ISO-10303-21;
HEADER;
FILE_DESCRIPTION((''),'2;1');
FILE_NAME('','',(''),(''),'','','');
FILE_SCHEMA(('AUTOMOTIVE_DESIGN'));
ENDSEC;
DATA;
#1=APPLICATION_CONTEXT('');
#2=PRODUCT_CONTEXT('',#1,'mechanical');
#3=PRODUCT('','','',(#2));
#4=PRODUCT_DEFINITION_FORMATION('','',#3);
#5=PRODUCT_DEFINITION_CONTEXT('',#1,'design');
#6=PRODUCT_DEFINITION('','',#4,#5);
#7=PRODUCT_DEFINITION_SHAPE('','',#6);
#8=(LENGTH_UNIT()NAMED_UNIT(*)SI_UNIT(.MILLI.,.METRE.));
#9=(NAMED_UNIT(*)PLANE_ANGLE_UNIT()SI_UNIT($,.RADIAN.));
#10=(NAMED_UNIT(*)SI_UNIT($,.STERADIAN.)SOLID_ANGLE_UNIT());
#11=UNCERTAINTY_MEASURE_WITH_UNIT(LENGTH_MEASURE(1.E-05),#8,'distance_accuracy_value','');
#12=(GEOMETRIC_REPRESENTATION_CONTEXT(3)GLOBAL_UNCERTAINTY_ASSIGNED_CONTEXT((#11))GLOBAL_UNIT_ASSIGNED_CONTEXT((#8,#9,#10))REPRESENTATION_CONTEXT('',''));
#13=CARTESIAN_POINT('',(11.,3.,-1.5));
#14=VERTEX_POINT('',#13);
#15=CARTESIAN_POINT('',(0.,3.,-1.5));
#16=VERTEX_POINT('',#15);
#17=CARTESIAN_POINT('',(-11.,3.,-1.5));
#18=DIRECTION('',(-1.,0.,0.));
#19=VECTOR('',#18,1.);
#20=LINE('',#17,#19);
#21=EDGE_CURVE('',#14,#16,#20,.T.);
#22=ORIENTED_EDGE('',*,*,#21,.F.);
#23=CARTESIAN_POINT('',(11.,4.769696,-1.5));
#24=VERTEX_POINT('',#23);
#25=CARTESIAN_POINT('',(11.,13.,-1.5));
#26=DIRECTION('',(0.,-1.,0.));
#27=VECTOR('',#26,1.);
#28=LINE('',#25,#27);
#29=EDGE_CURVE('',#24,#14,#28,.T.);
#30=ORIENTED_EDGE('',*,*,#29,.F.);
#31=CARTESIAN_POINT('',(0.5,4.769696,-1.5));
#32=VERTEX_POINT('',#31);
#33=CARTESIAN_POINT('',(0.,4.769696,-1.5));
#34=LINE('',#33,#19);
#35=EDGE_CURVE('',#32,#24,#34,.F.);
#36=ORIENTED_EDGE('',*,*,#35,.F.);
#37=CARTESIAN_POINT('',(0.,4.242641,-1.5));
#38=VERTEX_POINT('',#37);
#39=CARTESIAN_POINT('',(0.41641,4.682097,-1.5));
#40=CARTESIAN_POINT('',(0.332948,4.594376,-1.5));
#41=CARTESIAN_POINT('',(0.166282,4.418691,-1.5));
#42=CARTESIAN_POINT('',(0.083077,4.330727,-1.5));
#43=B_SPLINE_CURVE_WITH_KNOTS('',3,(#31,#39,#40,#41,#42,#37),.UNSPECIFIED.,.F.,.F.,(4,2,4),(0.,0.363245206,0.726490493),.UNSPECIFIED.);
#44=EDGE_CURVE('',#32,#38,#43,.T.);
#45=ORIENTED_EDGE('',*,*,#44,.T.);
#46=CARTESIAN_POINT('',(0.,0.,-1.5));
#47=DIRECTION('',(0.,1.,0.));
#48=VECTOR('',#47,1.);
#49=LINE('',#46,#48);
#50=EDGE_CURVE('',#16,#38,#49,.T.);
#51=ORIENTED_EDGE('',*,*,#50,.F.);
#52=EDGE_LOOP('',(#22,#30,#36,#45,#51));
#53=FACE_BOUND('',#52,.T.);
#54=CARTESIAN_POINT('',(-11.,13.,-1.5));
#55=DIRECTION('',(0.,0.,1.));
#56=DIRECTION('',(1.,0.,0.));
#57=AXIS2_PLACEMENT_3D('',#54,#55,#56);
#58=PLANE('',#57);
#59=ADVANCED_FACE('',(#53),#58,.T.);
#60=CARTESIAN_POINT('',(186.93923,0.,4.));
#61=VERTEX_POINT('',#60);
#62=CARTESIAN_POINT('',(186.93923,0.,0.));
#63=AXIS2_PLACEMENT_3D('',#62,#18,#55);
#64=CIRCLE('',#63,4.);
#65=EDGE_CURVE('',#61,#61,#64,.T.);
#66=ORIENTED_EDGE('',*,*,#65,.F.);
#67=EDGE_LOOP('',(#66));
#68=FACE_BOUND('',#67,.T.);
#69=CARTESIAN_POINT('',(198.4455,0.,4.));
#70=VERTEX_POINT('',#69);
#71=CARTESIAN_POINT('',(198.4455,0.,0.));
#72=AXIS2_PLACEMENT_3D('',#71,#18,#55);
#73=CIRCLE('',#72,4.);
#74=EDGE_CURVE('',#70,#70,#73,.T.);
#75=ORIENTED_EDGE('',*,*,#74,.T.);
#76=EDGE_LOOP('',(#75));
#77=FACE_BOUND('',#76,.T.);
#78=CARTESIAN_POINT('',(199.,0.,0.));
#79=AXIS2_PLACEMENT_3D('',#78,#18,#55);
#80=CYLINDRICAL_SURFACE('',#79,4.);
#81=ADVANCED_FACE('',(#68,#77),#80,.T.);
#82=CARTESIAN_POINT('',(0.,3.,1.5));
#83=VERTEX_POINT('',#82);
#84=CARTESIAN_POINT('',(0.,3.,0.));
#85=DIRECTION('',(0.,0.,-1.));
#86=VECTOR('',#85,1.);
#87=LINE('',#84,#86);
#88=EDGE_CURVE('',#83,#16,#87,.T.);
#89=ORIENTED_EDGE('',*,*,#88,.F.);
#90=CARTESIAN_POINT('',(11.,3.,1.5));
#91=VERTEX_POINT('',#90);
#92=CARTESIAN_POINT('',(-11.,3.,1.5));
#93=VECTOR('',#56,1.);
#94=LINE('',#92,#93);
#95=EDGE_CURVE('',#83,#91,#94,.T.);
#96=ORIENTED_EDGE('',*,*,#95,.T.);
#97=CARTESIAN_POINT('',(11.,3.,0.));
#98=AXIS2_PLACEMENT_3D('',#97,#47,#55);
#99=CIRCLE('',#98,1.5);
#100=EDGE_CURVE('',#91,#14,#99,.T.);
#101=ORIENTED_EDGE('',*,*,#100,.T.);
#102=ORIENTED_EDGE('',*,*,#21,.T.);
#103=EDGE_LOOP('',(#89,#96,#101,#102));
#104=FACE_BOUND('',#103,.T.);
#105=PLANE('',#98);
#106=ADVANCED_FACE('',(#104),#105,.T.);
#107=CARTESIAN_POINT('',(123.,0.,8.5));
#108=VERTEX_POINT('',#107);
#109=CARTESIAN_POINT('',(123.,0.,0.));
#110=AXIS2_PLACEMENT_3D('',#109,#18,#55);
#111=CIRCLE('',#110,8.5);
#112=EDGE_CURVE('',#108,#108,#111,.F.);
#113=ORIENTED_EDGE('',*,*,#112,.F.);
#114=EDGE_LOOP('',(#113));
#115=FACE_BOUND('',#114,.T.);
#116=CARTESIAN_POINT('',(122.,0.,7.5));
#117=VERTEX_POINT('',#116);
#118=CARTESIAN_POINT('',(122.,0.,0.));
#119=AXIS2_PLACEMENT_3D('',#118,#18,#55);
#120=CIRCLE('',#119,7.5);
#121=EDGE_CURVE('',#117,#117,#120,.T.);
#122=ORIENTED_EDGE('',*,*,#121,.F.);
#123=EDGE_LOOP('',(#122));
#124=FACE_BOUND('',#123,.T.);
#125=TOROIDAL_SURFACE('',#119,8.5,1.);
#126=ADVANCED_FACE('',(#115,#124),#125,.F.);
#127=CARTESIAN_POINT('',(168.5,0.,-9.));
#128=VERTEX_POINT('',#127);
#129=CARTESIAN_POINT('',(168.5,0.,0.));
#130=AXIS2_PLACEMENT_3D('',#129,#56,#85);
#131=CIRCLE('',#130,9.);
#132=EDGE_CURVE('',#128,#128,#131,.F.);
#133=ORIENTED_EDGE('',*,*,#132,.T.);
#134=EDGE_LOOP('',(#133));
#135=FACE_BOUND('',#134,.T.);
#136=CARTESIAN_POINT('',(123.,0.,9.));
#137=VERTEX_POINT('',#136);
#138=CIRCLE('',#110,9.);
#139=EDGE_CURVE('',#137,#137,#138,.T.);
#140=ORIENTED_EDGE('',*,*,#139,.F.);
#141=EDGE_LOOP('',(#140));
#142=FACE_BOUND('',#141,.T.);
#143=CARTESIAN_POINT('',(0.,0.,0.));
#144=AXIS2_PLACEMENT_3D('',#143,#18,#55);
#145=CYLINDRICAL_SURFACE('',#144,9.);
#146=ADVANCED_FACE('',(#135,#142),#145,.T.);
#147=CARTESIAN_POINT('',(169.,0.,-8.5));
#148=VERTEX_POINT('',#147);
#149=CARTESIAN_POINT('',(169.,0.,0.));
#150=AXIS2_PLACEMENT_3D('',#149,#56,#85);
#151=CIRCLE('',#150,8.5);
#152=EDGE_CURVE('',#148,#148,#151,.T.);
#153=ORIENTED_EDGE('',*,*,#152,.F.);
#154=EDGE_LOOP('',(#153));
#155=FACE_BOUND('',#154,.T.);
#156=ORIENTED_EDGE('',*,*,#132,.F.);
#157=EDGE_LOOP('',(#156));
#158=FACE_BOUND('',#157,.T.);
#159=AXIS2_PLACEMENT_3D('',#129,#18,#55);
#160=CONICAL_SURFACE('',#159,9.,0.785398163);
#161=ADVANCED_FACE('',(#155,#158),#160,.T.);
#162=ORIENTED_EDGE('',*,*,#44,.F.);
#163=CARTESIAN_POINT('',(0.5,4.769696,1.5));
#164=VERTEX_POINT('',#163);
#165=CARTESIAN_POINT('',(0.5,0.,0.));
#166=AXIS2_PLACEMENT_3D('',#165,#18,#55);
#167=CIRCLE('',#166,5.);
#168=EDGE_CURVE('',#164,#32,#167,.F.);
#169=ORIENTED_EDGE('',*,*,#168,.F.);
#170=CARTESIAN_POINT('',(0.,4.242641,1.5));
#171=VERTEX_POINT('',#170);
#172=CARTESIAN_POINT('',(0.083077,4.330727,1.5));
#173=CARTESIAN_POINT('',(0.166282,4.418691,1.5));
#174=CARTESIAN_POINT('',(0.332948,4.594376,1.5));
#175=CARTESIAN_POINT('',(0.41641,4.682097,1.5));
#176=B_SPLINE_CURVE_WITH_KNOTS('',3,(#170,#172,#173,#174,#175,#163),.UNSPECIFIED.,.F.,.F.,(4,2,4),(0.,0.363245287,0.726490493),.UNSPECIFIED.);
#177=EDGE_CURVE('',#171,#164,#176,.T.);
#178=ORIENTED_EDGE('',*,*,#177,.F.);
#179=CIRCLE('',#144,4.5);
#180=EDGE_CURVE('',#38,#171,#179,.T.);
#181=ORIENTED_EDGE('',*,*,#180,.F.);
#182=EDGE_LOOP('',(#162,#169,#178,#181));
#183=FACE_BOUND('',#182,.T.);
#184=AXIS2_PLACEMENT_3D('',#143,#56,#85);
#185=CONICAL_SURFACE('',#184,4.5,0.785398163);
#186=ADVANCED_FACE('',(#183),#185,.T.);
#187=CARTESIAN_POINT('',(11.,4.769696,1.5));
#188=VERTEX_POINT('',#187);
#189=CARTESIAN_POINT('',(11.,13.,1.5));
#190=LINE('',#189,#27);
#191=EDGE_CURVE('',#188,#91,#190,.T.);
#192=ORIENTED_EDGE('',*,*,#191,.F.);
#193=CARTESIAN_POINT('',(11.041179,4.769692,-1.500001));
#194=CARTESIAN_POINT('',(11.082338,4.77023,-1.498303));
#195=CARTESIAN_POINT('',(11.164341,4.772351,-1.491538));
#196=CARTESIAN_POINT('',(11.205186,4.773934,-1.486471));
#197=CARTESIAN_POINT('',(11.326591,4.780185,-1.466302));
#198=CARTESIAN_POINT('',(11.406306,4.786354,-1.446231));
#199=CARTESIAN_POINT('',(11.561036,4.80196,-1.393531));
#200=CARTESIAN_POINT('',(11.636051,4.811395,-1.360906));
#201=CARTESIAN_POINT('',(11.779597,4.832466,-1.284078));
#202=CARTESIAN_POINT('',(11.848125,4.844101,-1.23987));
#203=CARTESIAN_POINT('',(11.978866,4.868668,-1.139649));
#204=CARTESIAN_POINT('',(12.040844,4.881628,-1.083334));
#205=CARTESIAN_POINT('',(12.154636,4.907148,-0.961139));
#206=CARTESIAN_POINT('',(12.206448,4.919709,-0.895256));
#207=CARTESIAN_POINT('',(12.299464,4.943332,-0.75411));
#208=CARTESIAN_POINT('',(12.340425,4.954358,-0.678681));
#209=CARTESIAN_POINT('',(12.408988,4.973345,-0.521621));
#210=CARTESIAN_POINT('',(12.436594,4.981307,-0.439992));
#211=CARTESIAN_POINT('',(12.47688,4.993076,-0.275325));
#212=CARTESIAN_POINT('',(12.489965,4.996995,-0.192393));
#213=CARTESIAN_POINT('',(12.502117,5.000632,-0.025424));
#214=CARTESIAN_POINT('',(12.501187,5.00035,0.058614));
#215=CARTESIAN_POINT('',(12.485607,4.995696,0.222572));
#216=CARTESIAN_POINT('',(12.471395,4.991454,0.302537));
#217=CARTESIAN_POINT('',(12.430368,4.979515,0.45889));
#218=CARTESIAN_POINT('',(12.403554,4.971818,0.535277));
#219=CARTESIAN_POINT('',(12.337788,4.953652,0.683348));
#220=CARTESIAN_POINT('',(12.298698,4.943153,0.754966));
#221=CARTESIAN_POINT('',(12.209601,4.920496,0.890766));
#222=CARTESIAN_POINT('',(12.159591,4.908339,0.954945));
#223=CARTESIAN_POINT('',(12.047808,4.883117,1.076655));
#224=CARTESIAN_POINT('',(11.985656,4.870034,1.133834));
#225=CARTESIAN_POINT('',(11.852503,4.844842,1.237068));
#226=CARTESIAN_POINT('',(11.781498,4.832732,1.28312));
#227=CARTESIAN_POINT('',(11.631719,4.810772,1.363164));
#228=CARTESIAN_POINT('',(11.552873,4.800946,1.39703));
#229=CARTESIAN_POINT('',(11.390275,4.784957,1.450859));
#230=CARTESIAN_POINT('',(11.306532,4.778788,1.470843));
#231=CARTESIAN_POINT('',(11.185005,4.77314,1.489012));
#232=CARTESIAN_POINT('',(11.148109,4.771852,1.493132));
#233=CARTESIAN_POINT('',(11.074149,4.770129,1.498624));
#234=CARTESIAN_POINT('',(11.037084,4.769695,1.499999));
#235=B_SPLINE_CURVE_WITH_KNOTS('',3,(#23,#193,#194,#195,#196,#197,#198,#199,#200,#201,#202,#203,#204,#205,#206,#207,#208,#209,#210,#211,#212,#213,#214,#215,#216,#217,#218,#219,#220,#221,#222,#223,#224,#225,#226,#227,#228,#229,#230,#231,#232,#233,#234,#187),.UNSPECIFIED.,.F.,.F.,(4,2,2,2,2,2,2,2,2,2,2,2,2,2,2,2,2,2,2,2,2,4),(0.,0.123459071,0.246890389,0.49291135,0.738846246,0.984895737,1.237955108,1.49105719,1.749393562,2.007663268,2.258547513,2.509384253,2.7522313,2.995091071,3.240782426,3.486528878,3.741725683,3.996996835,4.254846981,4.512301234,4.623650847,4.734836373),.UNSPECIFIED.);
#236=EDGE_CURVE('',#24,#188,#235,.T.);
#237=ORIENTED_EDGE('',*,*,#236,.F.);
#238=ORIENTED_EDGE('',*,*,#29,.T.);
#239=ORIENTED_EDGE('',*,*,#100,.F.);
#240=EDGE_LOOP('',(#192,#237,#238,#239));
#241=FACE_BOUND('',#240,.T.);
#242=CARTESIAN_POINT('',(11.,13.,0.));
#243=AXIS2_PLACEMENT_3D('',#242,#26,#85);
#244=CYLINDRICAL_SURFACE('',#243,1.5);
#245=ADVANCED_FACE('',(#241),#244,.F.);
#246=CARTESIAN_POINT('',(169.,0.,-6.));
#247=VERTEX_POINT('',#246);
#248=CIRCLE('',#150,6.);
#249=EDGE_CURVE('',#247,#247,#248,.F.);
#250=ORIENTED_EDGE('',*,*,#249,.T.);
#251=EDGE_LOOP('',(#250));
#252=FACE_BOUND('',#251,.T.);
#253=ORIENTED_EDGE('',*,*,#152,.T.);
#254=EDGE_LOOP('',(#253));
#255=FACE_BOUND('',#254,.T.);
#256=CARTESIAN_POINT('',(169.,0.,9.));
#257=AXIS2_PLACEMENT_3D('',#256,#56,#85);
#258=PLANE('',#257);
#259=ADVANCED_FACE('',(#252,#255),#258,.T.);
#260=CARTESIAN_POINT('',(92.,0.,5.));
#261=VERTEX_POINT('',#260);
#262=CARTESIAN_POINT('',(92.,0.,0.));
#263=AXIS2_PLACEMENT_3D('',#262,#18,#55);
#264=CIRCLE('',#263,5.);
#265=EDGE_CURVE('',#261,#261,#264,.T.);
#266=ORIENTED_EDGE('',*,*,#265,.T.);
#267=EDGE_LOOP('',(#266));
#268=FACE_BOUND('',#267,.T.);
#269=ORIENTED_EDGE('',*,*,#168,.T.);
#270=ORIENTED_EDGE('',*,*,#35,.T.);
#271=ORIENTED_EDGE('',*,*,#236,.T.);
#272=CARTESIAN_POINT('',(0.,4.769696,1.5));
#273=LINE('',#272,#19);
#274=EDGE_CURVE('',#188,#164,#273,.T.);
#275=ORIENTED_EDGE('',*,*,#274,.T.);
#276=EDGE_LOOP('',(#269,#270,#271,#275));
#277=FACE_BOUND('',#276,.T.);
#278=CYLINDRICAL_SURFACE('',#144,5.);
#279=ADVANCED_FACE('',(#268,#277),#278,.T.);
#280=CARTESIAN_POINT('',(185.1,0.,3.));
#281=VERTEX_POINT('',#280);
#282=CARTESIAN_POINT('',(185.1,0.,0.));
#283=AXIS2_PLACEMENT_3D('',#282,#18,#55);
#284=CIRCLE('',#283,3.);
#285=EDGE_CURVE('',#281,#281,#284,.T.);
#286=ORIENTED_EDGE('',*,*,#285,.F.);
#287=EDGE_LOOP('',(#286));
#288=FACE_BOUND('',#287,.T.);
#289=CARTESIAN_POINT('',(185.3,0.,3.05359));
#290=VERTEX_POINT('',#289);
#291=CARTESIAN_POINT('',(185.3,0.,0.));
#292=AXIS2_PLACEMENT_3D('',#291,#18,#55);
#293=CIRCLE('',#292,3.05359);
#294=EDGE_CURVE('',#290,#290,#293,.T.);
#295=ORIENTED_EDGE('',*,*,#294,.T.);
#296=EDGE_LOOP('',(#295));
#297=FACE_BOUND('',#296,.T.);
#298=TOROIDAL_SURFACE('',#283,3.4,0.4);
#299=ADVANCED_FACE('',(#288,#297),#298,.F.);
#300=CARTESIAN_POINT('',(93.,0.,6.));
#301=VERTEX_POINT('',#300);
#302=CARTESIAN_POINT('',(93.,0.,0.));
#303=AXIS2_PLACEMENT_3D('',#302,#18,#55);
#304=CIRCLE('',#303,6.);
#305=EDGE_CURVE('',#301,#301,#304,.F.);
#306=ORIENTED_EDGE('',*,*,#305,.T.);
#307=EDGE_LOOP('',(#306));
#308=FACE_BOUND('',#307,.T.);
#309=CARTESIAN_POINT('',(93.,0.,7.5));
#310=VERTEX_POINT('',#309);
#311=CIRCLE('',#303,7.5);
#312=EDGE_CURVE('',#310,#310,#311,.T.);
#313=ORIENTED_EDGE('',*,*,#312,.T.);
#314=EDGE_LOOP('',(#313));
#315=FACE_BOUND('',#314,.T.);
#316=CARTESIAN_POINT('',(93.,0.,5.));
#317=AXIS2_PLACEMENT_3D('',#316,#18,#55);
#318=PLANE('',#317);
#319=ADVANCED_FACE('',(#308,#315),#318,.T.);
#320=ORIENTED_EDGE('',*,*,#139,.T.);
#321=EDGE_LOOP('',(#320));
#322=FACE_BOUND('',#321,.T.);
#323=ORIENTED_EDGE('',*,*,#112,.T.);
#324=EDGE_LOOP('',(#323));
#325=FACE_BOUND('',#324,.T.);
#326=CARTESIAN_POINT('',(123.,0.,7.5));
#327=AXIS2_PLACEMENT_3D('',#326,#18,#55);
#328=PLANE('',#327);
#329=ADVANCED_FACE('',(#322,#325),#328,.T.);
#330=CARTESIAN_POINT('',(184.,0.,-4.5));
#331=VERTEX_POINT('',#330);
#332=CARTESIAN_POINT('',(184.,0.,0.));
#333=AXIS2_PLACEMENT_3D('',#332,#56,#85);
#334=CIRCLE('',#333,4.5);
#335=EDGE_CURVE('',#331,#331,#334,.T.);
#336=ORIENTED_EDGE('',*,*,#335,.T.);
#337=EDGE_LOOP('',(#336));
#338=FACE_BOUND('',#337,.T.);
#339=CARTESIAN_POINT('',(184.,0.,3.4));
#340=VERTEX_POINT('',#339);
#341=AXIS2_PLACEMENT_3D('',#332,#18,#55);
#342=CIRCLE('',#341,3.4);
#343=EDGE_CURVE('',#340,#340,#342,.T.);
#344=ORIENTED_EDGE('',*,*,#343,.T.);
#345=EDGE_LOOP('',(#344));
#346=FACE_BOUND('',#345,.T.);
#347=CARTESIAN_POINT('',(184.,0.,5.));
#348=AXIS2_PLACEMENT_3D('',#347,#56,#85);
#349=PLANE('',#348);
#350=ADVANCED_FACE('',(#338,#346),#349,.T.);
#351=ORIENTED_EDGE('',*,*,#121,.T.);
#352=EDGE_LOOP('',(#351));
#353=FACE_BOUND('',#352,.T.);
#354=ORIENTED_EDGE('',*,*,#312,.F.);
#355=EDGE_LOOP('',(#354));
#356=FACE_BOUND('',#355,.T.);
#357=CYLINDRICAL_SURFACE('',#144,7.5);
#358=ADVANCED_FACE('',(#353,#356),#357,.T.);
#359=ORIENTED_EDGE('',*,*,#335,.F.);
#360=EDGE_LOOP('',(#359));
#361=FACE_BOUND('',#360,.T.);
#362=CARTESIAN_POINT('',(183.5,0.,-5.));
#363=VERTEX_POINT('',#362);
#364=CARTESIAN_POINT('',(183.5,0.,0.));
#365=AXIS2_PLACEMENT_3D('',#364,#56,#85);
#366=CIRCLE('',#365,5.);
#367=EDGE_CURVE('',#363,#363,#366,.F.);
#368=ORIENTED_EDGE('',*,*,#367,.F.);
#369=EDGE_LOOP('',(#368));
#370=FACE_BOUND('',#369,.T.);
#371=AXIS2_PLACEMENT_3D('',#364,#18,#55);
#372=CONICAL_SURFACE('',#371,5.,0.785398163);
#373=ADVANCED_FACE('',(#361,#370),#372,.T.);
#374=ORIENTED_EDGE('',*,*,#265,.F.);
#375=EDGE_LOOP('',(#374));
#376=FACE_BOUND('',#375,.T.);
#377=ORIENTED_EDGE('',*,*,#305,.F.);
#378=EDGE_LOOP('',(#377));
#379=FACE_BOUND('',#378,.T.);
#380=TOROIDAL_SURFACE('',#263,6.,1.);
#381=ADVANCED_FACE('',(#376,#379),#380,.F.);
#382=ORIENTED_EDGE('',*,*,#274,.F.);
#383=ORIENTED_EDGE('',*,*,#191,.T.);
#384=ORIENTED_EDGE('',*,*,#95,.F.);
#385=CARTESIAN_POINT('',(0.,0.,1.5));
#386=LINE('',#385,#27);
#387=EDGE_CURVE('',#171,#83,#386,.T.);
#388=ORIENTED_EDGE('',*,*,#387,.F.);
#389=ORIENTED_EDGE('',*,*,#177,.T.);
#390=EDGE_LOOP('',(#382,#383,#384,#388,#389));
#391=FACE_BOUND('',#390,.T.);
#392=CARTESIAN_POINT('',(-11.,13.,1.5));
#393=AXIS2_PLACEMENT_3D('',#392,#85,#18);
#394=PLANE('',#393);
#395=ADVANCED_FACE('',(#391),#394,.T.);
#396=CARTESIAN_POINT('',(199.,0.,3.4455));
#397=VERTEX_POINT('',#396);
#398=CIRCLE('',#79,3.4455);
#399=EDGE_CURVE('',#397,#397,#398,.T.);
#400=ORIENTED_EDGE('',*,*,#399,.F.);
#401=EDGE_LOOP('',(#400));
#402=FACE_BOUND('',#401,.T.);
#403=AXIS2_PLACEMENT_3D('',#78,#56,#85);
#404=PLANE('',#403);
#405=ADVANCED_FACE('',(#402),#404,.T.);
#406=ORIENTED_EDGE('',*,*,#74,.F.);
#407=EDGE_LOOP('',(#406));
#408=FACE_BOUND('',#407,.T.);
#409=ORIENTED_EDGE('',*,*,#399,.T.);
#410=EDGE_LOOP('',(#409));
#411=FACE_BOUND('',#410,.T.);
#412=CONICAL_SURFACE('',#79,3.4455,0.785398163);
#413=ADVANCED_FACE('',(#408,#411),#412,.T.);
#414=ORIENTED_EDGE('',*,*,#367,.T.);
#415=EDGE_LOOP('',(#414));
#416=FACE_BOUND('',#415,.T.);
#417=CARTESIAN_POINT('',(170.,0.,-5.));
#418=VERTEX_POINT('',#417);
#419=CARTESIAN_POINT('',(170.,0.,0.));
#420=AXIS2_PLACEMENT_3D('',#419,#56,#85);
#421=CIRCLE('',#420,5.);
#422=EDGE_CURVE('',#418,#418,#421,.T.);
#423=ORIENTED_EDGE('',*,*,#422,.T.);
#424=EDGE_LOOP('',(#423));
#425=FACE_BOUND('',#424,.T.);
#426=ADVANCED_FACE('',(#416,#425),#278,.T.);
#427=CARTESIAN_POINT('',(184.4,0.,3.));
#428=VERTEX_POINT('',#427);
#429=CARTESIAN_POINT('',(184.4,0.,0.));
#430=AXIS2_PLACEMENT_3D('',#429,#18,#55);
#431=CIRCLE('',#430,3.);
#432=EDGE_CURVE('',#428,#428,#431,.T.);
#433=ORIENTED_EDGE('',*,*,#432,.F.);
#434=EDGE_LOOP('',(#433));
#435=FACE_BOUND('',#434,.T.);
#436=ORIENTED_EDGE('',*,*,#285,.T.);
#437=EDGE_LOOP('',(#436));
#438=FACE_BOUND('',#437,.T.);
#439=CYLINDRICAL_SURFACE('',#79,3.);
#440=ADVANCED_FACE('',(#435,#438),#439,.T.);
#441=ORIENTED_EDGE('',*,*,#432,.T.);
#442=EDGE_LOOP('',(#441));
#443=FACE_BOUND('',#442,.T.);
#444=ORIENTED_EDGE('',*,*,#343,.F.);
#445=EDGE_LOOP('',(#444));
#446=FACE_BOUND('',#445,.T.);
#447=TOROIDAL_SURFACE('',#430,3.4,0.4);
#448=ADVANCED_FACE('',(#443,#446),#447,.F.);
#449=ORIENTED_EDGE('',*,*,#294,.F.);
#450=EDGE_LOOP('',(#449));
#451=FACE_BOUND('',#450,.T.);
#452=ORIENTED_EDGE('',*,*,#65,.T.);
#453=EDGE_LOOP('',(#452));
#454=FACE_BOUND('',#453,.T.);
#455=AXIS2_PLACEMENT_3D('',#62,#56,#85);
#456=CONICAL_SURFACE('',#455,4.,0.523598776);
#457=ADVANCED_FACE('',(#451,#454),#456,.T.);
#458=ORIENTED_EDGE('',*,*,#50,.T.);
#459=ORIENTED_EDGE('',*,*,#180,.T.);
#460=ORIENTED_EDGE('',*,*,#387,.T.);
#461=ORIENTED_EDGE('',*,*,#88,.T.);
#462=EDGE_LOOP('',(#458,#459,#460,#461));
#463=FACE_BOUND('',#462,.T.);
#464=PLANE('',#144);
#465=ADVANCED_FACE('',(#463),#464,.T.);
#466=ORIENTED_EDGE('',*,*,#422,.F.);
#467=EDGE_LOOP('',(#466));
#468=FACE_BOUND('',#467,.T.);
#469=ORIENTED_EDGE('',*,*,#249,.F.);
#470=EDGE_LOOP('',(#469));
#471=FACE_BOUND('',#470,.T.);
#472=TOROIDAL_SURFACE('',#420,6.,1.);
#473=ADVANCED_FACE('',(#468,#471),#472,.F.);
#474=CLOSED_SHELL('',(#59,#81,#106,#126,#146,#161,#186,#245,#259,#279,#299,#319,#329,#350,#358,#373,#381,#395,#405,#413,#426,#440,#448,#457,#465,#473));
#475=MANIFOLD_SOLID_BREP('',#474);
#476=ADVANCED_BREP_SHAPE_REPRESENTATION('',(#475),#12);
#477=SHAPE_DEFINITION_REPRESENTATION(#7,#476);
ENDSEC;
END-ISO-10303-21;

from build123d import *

# Parameters (mm, degrees)
CUT_EXTRUDE1_START  = 3
CUT_EXTRUDE1_DEPTH  = 10
FILLET1_R           = 1
CHAMFER1_SIZE       = 0.5
CHAMFER2_SIZE       = 0.5
SKETCH3_R           = 4.1
BOSS_EXTRUDE1_DEPTH = 15


# Read off the part's stored shape, not the designer's step: M8x1.0 Machine Threads Stud1
with BuildPart() as part:
    # Sketch1 → Revolve1 (revolve)
    with BuildSketch(Plane(origin=(0, 0, 0), x_dir=(1, 0, 0), z_dir=(0, 1, 0))):
        Polygon((0, 0), (0, -5), (93, -5), (93, -7.5), (123, -7.5), (123, -9), (169, -9), (169, -5), (184, -5), (184, 0), align=None)
    revolve(axis=Axis((0, 0, 0), (1, 0, 0)))

    # Sketch2 → Cut-Extrude1 (cut)
    with BuildSketch(Plane(origin=(0, 0, 0), x_dir=(1, 0, 0), z_dir=(0, 1, 0)).offset(CUT_EXTRUDE1_START)):
        with BuildLine():
            Line((-11, -1.5), (11, -1.5))
            ThreePointArc((11, -1.5), (12.5, 0), (11, 1.5))
            Line((11, 1.5), (-11, 1.5))
            Line((-11, 1.5), (-11, -1.5))
        make_face()
    extrude(amount=CUT_EXTRUDE1_DEPTH, mode=Mode.SUBTRACT)

    # Fillet1
    fillet1_edges = [part.edges().sort_by_distance(p)[0] for p in [
        (123, 0, -7.5),
        (93, 0, -5),
        (169, 0, -5),
    ]]
    fillet(fillet1_edges, radius=FILLET1_R)

    # Chamfer1
    chamfer1_edges = [part.edges().sort_by_distance(p)[0] for p in [
        (0, -4.031128874, -2.958039892),
    ]]
    chamfer(chamfer1_edges, length=CHAMFER1_SIZE)

    # Chamfer2
    chamfer2_edges = [part.edges().sort_by_distance(p)[0] for p in [
        (184, 0, -5),
        (169, 0, -9),
    ]]
    chamfer(chamfer2_edges, length=CHAMFER2_SIZE)

    # Sketch3 → Boss-Extrude1 (add)
    with BuildSketch(Plane(origin=(184, 0, 0), x_dir=(0, 0, -1), z_dir=(1, 0, 0))):
        Circle(SKETCH3_R)
    extrude(amount=BOSS_EXTRUDE1_DEPTH)

    # M8x1.0 Machine Threads Stud1 outline → M8x1.0 Machine Threads Stud1 (revolve, cut)
    with BuildSketch(Plane.YX):
        with BuildLine():
            ThreePointArc((3, 184.4), (3.117157288, 184.117157288), (3.4, 184))
            Line((3.4, 184), (4.1, 184))
            Line((4.1, 184), (4.1, 199))
            Line((4.1, 199), (3.4455, 199))
            Line((3.4455, 199), (4, 198.4455))
            Line((4, 198.4455), (4, 186.939230485))
            Line((4, 186.939230485), (3.053589838, 185.3))
            ThreePointArc((3.053589838, 185.3), (3.013629669, 185.203527618), (3, 185.1))
            Line((3, 185.1), (3, 184.4))
        make_face()
    revolve(axis=Axis((0, 0, 0), (1, 0, 0)), mode=Mode.SUBTRACT)


solid = part.part
